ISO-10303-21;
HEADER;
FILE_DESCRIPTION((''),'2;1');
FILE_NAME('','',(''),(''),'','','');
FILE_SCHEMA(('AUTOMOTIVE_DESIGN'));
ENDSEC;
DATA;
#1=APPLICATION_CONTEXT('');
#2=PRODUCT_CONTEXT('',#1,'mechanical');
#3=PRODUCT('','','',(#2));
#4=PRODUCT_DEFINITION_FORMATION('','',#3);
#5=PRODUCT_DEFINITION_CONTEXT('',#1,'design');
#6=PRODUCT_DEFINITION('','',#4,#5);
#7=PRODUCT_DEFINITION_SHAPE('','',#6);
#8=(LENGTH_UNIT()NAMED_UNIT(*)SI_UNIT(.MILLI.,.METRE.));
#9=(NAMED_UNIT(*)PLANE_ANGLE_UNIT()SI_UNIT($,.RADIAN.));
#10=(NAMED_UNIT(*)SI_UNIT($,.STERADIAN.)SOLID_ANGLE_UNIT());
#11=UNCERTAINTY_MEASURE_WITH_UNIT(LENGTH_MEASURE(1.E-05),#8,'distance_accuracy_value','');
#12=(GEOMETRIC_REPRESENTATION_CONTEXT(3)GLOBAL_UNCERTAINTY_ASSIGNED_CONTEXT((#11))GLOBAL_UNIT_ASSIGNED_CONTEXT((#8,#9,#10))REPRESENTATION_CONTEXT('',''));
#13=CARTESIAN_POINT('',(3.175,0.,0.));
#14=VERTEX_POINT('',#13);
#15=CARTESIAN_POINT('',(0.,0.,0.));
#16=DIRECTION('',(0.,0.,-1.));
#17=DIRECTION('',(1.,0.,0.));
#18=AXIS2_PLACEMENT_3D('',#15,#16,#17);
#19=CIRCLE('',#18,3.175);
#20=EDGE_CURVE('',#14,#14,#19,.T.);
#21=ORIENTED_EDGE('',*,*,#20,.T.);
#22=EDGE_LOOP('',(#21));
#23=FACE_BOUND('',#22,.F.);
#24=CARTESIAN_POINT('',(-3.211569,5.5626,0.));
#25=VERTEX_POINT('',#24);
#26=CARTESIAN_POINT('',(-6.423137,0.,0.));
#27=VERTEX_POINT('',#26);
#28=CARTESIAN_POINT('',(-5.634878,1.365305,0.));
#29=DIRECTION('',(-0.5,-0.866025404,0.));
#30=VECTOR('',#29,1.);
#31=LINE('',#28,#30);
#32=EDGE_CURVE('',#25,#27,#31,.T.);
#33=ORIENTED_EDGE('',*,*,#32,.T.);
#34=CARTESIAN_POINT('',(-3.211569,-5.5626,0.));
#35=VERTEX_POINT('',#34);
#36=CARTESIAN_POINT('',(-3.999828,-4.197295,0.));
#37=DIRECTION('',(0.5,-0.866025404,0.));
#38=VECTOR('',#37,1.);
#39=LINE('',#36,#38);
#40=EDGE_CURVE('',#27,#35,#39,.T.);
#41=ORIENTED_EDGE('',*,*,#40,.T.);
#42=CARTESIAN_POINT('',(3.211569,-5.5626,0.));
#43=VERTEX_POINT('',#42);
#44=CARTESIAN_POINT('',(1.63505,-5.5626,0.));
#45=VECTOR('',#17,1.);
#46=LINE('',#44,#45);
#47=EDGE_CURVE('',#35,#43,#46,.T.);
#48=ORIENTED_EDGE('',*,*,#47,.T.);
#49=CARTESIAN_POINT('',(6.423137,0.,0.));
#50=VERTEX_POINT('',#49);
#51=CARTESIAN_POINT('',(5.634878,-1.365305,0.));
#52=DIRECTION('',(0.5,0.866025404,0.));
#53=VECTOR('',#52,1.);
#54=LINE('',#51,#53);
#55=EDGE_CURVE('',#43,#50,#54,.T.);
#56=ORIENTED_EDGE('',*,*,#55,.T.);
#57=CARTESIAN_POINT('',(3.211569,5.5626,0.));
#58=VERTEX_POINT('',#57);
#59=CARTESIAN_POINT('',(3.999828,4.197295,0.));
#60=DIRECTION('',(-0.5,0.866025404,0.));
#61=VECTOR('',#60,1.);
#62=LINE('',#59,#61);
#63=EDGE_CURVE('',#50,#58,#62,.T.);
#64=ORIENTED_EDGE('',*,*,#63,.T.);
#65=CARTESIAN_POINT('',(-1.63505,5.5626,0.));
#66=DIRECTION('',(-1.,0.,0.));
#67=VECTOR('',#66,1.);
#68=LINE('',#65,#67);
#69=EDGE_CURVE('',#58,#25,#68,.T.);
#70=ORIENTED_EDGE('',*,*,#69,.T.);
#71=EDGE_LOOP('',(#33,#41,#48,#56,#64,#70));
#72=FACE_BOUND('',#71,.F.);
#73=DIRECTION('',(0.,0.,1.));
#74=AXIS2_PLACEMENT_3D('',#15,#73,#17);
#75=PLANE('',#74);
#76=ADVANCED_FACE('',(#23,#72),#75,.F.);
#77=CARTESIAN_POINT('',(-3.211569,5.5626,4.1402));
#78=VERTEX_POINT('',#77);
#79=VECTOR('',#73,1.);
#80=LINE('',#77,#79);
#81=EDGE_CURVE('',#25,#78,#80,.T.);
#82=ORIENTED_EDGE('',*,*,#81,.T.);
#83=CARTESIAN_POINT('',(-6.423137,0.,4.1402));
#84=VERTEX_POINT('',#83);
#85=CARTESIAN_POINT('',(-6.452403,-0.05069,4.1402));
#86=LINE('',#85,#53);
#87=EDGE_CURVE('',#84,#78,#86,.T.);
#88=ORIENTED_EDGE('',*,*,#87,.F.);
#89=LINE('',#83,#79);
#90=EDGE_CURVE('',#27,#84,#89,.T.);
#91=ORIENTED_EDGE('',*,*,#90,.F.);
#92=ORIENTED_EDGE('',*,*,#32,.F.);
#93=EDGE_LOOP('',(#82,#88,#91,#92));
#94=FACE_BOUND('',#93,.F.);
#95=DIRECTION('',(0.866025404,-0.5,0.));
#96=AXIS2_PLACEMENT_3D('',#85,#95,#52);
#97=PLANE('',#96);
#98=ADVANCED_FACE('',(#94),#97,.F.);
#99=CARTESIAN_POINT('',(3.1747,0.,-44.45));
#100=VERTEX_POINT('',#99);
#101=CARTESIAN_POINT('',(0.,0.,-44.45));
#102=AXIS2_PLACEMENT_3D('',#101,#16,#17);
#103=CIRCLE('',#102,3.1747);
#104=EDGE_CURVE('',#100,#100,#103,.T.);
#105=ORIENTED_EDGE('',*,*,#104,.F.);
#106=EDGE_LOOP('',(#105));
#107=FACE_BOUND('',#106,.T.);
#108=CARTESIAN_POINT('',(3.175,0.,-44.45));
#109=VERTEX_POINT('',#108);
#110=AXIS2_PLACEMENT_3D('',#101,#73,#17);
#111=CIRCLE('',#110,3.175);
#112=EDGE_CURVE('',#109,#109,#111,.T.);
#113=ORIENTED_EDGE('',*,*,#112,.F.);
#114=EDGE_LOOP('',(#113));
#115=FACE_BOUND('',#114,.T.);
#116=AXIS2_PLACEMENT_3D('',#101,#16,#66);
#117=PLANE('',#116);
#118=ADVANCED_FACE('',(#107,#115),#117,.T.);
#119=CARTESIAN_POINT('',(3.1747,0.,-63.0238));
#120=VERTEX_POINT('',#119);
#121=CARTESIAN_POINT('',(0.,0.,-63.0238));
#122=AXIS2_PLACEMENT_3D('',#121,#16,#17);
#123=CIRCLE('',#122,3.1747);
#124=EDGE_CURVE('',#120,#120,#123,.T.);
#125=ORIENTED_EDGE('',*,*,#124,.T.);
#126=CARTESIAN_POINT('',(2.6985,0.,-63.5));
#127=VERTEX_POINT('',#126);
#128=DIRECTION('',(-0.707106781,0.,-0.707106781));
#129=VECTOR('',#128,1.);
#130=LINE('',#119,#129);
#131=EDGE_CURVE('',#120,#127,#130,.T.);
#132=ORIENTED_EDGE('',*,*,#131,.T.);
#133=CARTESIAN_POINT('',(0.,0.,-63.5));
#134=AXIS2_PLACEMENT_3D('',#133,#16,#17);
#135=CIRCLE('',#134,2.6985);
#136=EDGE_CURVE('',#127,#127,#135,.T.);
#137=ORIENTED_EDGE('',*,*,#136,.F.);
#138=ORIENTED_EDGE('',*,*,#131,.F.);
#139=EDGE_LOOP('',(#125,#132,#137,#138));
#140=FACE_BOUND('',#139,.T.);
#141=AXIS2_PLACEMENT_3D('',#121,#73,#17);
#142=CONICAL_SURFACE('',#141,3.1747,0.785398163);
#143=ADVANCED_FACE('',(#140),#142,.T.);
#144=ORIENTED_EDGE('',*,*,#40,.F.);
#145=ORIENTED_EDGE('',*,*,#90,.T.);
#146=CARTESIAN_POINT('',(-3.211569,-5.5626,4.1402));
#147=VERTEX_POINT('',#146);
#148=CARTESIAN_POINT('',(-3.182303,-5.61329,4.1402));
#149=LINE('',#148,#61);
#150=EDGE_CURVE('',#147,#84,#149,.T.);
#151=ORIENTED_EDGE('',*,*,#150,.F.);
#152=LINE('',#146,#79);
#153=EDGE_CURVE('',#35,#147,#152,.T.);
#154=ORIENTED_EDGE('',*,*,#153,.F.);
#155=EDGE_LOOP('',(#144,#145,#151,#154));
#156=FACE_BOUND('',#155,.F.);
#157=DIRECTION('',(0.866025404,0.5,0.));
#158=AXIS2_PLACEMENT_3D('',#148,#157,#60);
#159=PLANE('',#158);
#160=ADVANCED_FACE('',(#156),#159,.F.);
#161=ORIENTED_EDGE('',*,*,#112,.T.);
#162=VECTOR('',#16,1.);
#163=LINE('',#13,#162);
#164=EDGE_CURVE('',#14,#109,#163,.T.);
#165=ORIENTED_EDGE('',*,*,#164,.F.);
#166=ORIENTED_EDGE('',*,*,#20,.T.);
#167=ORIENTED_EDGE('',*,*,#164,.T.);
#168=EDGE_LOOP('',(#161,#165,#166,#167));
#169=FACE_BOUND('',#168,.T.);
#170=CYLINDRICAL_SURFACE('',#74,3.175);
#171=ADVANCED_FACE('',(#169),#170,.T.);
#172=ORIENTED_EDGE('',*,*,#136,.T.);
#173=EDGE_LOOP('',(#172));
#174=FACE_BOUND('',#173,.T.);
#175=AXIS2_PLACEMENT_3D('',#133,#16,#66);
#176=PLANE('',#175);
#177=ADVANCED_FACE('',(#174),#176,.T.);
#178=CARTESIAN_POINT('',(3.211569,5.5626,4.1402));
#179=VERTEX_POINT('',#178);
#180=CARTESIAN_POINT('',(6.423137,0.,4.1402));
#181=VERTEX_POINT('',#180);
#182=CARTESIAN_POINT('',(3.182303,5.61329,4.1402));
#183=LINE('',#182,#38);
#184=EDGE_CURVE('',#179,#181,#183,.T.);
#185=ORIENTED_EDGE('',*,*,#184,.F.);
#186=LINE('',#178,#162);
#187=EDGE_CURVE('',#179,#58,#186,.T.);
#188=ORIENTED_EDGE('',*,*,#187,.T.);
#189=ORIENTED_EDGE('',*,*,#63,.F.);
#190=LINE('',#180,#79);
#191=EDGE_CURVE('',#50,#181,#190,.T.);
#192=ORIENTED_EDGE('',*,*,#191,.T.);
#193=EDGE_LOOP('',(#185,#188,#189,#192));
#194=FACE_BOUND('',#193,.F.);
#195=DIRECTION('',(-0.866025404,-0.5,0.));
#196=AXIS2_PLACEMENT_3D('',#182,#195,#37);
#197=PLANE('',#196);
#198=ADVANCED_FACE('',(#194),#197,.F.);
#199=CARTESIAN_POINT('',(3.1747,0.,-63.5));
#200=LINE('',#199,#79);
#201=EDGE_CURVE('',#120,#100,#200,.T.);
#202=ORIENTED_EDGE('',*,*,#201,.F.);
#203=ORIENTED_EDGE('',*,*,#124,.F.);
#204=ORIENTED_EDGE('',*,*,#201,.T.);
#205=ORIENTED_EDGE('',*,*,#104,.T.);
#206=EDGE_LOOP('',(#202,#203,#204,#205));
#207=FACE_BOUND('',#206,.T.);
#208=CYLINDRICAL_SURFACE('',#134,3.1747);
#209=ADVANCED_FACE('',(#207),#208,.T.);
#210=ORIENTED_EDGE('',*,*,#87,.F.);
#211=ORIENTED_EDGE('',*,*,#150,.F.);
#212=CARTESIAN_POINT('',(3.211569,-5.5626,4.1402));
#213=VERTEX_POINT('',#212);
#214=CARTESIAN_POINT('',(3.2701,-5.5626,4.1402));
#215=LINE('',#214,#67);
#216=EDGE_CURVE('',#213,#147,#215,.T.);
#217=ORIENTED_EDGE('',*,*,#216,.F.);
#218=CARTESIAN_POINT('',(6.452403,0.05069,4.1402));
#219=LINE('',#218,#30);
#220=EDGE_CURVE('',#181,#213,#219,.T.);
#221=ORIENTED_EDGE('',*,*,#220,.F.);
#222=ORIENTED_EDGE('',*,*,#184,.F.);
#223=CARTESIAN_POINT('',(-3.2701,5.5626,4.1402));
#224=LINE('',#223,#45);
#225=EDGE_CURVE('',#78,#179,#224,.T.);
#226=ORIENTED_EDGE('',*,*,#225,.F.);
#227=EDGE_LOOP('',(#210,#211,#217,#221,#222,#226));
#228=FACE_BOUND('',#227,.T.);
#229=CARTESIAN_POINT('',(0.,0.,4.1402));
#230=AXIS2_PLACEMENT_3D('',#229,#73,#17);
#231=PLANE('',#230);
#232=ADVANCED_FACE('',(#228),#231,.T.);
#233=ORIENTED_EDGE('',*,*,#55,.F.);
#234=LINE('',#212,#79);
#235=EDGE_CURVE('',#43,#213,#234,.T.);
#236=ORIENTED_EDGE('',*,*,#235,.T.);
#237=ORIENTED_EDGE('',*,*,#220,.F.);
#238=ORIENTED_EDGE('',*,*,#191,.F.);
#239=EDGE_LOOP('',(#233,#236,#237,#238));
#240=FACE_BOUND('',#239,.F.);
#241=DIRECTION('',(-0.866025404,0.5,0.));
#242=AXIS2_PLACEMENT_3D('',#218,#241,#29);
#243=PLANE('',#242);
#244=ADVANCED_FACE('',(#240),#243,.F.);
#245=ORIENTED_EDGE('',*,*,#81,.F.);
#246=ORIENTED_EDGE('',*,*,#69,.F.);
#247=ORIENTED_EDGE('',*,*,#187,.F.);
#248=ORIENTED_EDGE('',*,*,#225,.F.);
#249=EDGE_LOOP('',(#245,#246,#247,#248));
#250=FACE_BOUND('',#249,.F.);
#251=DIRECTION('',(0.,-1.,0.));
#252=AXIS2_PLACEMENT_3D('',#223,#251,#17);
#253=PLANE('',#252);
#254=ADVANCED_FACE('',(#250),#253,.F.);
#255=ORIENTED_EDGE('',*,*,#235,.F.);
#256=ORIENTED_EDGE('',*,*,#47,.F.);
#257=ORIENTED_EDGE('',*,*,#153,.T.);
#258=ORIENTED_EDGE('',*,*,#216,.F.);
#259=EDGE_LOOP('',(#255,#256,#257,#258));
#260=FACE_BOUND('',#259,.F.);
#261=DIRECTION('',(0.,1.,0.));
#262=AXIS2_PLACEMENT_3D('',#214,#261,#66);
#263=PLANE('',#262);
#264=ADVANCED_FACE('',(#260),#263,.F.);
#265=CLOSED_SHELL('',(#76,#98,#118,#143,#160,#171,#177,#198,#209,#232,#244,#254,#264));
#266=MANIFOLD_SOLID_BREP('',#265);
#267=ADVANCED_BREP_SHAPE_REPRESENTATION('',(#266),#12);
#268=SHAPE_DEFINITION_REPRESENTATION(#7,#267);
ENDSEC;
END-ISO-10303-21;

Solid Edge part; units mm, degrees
sketch "Sketch1" plane through (0, 0, 0) normal (0, 0, 1) x (1, 0, 0)
  circle A0 centre (0, 0) radius 6.4526
  dimension "D1" = 12.9052
extrude "Protrusion1" add sketch "Sketch1" along normal blind 4.1402
sketch "Sketch2" plane through (0, 0, 0) normal (0, 0, -1) x (1, 0, 0)
  circle A0 centre (0, 0) radius 3.175
extrude "Protrusion2" add sketch "Sketch2" along normal blind 63.5
sketch "Sketch3" plane through (0, 0, -63.5) normal (0, 0, -1) x (1, 0, 0)
  circle A0 centre (0, 0) radius 3.1747
extrude "Cutout1" cut sketch "Sketch3" against normal blind 19.05 flip side to cut
chamfer "Chamfer_1" distance 0.4762 angle 45 1 edges at (-3.1747, 0, -63.5)
sketch "Sketch4" plane through (0, 0, 4.1402) normal (0, 0, 1) x (1, 0, 0)
  line L0 (-3.2701, 5.5626) -> (3.2701, 5.5626)
  dimension "D1" = 11.1252
extrude "Cutout2" cut sketch "Sketch4" against normal up to next material side at (0, 5.6126, 4.1402)
pattern_circular "Pattern1" count 6 over 360 about axis through (0, 0, 4.1402) along (0, 0, 1) of "Cutout2"
properties part number "24102822"
